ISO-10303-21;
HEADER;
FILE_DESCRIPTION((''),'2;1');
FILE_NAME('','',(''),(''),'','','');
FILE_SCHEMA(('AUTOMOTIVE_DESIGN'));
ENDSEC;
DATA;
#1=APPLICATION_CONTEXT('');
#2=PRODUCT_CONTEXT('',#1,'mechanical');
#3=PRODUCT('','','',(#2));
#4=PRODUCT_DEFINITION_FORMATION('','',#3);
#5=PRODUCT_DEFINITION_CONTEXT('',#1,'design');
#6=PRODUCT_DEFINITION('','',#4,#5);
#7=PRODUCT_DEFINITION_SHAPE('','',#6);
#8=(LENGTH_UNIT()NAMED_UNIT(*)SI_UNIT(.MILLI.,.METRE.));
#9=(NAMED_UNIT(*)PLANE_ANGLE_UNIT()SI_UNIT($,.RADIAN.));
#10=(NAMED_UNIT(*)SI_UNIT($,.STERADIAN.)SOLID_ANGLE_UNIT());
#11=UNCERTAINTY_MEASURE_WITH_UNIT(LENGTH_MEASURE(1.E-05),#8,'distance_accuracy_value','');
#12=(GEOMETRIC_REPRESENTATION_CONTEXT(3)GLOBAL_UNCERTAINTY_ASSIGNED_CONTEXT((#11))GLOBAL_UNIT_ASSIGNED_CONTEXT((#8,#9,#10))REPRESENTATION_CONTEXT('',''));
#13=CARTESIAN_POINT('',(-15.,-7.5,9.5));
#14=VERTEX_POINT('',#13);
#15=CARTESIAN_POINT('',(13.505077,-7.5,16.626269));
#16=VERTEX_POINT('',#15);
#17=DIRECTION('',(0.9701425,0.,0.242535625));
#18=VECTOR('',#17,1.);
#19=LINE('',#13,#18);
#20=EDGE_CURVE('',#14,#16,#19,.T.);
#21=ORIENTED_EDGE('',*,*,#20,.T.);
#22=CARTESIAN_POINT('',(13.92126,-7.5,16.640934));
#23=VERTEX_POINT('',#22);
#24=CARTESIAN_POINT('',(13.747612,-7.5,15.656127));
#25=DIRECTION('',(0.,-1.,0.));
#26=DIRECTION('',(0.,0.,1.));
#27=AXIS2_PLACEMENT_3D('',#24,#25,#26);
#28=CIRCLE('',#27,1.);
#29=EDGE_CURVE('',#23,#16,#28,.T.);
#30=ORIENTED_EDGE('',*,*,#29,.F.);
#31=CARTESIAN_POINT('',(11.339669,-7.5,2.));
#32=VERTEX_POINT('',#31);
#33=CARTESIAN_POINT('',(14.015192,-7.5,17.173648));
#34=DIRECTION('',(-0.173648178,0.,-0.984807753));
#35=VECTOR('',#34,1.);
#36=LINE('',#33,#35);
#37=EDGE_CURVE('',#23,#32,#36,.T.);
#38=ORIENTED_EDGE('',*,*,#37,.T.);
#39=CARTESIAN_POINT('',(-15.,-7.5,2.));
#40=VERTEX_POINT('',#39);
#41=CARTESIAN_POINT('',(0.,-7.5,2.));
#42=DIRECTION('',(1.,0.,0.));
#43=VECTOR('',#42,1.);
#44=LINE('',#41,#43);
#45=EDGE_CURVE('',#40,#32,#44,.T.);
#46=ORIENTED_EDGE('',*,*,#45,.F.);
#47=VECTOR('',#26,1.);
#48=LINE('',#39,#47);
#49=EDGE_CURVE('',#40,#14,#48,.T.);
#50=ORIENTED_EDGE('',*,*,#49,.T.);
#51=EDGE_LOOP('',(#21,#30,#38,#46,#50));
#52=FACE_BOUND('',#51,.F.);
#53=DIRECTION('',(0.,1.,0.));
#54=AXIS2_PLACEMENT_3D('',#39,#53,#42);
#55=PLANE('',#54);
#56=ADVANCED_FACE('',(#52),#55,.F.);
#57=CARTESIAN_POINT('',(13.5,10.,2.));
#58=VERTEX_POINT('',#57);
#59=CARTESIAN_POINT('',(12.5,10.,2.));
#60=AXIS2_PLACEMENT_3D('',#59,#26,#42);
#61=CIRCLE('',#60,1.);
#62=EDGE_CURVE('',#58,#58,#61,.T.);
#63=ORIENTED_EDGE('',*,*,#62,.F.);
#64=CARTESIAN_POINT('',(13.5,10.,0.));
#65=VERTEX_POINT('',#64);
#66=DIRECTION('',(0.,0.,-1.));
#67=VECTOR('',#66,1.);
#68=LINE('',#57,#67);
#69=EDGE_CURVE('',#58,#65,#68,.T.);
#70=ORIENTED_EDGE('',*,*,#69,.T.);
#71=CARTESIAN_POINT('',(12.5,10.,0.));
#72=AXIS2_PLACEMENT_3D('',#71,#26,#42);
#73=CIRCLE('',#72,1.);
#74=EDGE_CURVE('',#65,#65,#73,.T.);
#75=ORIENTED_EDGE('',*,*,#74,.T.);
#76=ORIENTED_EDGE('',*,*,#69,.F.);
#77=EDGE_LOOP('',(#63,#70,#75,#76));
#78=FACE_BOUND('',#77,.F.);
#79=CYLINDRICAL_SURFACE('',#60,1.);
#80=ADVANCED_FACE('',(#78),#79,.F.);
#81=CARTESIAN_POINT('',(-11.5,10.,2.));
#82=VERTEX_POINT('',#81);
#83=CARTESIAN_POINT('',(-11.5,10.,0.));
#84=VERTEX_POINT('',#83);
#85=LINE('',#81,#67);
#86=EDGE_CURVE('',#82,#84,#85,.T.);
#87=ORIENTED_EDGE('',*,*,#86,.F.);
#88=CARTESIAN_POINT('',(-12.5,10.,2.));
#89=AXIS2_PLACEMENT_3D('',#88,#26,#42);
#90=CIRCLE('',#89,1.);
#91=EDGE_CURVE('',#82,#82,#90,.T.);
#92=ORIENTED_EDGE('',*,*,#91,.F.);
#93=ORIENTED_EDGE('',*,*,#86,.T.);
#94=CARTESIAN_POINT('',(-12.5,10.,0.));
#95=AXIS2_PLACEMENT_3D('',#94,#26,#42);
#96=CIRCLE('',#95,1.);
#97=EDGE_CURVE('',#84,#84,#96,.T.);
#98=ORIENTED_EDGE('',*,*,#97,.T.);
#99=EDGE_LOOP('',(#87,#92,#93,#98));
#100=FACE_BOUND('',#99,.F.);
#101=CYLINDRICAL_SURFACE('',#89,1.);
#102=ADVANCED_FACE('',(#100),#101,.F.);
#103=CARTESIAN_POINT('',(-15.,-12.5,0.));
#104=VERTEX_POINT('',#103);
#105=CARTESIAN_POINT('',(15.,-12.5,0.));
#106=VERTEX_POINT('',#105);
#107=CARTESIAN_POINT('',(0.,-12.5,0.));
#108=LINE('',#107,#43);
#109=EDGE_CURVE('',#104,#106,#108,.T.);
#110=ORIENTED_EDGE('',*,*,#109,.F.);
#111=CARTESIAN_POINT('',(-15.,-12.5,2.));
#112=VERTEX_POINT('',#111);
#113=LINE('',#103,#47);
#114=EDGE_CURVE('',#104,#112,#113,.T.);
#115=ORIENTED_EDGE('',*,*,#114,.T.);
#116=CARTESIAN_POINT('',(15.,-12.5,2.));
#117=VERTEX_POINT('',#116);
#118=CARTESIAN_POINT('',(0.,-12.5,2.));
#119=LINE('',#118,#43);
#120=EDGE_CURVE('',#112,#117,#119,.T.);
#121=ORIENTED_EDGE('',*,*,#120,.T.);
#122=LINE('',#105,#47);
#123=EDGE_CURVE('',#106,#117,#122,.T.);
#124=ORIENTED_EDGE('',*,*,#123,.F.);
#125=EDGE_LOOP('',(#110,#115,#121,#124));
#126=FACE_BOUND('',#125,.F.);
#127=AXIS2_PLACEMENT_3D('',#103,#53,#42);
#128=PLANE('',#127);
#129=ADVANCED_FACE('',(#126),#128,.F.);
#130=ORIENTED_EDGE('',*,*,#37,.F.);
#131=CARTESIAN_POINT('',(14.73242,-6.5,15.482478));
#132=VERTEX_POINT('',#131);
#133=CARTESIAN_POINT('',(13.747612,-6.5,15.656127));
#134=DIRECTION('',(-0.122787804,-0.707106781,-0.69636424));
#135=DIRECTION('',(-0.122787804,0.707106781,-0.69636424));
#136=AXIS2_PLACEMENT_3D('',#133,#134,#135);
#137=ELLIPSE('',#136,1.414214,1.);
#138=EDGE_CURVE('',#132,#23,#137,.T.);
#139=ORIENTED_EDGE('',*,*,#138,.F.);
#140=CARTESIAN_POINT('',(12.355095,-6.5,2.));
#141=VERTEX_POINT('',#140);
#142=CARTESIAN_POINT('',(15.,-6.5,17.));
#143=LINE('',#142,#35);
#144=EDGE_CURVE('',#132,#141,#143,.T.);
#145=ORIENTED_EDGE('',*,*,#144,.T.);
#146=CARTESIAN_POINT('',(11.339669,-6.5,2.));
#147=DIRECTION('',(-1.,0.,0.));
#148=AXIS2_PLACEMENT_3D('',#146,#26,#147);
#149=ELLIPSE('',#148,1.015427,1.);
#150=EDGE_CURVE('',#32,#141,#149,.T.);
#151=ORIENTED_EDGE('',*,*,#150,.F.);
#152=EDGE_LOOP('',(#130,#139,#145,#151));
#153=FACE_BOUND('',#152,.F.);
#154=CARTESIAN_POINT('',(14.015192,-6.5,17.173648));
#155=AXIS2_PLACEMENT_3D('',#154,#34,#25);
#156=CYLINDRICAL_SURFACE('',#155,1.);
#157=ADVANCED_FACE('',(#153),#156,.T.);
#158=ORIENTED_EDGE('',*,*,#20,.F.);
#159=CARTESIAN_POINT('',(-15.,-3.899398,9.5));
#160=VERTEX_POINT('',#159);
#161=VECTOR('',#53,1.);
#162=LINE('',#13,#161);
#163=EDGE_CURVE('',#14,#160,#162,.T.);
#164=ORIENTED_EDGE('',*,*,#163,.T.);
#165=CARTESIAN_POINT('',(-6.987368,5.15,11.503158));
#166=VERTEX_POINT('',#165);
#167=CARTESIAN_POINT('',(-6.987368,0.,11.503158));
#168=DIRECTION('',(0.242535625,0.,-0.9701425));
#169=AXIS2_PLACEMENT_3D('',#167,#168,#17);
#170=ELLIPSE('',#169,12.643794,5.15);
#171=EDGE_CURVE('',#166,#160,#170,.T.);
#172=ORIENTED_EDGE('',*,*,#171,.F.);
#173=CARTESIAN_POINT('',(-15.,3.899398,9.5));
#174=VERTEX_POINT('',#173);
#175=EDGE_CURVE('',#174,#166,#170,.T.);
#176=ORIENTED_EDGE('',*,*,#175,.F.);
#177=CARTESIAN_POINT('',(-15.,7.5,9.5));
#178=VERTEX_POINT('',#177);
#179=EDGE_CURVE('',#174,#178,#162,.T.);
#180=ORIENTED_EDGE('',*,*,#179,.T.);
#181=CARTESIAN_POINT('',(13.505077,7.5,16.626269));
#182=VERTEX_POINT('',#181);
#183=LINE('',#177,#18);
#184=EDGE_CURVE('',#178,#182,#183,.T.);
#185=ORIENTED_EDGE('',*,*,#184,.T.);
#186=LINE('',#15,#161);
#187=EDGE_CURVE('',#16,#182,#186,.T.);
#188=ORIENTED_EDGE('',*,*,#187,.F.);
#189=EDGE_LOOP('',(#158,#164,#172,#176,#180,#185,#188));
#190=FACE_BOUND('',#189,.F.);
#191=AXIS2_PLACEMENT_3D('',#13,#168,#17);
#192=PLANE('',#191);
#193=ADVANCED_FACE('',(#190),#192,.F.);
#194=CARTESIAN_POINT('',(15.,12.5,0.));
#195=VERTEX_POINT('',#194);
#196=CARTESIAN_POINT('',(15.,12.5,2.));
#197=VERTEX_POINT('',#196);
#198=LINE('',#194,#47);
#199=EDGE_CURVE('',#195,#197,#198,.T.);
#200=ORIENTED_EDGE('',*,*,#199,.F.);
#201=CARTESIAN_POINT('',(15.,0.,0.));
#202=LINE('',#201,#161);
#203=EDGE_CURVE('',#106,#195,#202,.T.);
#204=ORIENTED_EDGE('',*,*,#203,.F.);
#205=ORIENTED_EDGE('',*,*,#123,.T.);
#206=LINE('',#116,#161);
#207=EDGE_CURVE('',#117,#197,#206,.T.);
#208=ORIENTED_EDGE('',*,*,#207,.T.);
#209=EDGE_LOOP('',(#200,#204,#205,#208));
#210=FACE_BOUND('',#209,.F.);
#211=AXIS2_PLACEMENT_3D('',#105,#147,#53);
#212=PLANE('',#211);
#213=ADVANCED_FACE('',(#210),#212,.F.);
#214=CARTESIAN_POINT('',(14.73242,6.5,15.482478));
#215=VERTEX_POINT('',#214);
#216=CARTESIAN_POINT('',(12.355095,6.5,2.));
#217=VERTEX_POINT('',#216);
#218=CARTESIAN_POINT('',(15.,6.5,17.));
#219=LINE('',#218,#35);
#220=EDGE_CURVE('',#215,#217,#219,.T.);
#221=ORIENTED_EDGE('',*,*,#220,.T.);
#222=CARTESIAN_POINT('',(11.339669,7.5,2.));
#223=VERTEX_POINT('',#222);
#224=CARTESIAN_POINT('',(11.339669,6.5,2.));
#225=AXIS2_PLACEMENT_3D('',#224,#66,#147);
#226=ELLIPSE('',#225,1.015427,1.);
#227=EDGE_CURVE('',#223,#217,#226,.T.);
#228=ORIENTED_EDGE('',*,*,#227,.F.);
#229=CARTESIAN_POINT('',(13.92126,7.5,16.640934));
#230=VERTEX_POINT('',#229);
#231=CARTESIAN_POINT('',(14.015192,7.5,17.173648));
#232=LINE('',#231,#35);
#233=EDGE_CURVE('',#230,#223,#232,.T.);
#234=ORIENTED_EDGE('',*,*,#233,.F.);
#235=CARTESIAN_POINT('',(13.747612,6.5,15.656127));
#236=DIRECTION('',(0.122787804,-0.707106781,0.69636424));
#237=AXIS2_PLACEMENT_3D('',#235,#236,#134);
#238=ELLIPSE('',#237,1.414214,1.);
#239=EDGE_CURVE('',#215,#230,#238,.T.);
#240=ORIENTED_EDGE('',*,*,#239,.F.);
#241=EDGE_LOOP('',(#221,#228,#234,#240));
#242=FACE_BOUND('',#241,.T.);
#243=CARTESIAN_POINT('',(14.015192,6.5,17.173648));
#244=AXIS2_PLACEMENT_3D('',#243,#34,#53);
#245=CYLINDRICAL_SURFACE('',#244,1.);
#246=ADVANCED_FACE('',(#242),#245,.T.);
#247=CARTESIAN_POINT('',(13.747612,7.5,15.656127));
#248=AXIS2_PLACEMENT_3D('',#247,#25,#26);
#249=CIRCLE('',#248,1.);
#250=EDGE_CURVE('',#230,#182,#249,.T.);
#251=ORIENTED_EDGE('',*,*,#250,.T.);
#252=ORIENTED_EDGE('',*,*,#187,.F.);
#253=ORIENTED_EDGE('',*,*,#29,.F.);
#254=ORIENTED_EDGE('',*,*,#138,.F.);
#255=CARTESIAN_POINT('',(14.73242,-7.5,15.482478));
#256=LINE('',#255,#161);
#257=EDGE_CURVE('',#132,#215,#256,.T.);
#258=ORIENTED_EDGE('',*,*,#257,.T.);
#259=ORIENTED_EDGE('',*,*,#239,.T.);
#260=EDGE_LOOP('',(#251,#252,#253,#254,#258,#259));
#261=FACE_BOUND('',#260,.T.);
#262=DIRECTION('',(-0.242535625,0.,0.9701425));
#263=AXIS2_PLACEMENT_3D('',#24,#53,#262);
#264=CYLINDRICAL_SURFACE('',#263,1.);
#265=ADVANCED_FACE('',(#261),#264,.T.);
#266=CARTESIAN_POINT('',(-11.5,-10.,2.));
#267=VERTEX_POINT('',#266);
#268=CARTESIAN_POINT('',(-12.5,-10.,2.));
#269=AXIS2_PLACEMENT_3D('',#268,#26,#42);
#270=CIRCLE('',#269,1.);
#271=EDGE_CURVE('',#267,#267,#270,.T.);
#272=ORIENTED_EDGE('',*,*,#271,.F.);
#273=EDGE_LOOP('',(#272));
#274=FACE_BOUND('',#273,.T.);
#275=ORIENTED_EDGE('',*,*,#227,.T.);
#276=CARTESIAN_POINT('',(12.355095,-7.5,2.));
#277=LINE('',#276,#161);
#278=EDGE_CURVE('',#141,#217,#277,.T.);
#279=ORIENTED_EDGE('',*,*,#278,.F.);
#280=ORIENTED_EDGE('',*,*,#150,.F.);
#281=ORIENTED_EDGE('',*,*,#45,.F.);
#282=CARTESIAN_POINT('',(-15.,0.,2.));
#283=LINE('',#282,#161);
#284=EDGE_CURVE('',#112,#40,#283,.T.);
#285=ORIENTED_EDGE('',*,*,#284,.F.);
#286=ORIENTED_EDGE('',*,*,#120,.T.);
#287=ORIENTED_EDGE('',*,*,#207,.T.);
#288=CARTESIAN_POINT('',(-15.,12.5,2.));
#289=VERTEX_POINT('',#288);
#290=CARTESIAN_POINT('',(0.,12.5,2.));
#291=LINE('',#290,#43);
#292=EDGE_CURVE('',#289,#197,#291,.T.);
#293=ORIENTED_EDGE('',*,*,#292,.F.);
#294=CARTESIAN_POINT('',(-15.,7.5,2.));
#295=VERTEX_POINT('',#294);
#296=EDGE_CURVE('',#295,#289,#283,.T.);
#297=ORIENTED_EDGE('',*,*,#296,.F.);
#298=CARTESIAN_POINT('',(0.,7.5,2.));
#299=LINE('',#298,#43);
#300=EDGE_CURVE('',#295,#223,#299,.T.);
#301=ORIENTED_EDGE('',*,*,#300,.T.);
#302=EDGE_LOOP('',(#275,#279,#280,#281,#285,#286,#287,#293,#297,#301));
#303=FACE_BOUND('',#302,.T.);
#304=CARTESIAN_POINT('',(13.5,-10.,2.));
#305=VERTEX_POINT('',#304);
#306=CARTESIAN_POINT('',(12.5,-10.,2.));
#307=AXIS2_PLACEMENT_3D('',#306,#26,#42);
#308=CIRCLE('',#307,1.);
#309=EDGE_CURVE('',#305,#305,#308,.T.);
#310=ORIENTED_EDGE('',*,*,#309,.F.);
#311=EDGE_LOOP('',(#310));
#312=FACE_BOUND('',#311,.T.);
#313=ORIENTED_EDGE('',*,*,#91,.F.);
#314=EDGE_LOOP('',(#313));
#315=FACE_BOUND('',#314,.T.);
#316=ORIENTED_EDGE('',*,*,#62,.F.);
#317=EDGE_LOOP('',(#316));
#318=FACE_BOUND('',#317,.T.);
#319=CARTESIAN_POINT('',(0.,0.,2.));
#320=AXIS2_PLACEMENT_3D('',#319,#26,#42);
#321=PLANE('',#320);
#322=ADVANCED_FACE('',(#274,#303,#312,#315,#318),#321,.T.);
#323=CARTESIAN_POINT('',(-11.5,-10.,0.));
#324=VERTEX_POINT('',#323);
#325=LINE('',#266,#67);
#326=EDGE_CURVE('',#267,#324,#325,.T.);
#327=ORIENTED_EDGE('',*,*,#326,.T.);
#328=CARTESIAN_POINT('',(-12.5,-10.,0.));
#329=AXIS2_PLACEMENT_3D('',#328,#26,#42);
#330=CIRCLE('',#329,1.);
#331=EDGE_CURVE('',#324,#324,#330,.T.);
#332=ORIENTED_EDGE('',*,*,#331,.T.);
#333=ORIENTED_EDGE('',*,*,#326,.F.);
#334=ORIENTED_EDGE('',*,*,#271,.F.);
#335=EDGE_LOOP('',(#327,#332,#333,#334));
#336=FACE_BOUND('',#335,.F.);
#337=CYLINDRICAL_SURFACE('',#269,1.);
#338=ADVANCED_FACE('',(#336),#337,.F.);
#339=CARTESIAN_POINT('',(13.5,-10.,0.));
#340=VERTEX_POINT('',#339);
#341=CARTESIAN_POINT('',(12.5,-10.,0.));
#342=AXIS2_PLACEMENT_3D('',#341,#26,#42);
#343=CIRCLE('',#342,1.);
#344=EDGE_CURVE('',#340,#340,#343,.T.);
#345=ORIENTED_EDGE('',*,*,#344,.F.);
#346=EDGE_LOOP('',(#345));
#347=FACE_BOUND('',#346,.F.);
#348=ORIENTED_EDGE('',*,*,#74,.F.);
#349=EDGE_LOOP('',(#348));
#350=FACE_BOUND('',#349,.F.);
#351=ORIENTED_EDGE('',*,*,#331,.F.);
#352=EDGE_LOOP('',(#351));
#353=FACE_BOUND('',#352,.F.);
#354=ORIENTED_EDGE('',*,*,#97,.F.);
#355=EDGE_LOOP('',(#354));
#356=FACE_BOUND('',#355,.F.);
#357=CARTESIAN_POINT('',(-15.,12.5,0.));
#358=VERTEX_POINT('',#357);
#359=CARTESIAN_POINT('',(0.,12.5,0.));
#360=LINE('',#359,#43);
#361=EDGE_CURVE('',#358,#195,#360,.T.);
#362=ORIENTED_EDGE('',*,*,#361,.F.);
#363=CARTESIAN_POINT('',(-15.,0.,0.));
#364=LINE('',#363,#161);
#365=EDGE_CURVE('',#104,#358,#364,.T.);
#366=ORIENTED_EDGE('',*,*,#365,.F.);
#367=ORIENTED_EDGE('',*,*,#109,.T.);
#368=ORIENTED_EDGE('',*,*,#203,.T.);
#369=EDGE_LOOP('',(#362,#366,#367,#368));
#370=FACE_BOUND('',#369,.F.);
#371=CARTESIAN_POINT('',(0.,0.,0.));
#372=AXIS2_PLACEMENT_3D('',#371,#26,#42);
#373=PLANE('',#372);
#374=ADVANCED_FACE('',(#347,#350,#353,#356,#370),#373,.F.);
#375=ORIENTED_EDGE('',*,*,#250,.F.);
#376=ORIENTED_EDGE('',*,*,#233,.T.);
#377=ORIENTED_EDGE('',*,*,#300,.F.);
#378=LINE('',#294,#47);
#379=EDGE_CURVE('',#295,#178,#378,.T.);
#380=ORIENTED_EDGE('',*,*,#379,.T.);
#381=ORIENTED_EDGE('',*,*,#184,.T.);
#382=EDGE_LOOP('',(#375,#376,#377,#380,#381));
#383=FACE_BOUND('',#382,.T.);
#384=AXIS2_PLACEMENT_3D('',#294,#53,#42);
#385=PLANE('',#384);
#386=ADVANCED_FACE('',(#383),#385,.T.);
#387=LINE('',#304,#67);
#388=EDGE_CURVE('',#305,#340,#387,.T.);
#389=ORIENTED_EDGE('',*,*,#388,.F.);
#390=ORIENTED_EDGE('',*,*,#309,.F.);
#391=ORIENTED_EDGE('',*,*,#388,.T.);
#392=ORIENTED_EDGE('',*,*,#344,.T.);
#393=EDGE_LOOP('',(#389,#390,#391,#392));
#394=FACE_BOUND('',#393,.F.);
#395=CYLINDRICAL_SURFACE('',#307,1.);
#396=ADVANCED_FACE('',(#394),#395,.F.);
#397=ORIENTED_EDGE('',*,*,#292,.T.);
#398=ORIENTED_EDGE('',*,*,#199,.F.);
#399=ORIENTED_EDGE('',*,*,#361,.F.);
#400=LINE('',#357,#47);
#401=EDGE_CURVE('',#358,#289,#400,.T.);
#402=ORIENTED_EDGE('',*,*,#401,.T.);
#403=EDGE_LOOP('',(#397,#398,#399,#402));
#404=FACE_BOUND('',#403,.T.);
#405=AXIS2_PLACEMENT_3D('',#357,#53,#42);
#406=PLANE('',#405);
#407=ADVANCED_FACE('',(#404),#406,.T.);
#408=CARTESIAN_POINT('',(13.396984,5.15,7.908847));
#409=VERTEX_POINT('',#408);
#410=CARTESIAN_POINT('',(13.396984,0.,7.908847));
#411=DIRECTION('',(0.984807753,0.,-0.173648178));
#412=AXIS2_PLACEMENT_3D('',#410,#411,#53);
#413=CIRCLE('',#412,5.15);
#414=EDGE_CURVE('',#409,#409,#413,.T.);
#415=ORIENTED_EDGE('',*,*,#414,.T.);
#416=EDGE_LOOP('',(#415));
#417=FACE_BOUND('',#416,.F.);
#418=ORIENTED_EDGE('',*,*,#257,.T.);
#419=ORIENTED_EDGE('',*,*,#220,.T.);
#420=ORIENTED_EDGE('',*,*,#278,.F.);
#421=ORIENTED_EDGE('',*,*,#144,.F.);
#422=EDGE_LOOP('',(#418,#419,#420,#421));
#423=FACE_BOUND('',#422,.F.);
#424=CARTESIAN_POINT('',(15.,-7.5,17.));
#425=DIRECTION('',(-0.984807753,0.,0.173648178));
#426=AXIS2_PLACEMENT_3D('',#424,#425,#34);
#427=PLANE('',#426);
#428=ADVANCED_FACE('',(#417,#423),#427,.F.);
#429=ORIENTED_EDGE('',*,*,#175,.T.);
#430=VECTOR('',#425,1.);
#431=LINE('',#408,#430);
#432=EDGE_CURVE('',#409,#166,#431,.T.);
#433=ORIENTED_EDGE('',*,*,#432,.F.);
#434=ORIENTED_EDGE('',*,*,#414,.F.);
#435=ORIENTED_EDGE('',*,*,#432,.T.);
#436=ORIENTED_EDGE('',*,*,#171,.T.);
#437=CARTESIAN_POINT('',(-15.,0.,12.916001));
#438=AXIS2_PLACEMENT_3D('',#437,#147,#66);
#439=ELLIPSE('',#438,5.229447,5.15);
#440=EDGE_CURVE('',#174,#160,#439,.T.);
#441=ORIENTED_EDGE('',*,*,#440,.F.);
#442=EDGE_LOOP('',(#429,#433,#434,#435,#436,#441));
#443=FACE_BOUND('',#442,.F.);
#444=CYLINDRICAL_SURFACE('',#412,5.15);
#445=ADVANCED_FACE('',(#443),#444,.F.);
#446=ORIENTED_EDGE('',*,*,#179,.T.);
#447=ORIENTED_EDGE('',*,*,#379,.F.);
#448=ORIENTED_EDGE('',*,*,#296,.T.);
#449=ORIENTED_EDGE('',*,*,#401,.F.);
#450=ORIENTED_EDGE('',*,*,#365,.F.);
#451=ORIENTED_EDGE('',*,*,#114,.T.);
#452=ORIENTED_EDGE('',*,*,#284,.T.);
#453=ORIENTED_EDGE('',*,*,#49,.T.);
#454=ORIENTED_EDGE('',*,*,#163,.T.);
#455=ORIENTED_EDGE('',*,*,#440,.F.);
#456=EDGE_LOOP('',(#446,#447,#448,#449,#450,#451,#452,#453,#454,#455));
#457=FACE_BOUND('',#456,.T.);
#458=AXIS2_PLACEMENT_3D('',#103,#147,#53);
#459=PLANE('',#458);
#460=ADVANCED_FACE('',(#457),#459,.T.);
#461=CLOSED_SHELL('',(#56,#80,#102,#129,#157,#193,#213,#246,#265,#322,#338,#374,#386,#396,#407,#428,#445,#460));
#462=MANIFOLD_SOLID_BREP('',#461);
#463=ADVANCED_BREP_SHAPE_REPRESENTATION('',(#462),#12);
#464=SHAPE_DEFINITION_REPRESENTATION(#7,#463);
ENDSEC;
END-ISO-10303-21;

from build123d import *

# Parameters (mm, degrees)
F0_W      = 30
F0_H      = 25
F1_DEPTH  = 2
F2_R      = 1
F3_DEPTH  = 2
F4_W      = 30
F4_H      = 15
F5_DEPTH  = 15
F7_DEPTH  = 15
F9_DEPTH  = 15
F10_R     = 5.15
F11_DEPTH = 28.2428712579
F12_R     = 1


with BuildPart() as f1:
    # F0 (on Top) → F1 (new body)
    with BuildSketch(Plane.XY):
        Rectangle(F0_W, F0_H)
    extrude(amount=F1_DEPTH)

    # F2 (on face) → F3 (cut)
    with BuildSketch(Plane.XY.offset(2)):
        with Locations((12.5, 10)):
            Circle(F2_R)
        with Locations((-12.5, 10)):
            Circle(F2_R)
        with Locations((-12.5, -10)):
            Circle(F2_R)
        with Locations((12.5, -10)):
            Circle(F2_R)
    extrude(amount=-F3_DEPTH, mode=Mode.SUBTRACT)

    # F4 (on face) → F5 (join)
    with BuildSketch(Plane.XY.offset(2)):
        Rectangle(F4_W, F4_H)
    extrude(amount=F5_DEPTH)

    # F6 (on face) → F7 (cut, through all)
    with BuildSketch(Plane.XZ.offset(7.5)):
        Polygon((-15, 9.5), (15, 17), (-15, 17), align=None)
    extrude(amount=-F7_DEPTH, mode=Mode.SUBTRACT)

    # F8 (on face) → F9 (cut, through all)
    with BuildSketch(Plane.XZ.offset(7.5)):
        Polygon((15, 2), (15, 17), (12.3550952894, 2), align=None)
    extrude(amount=-F9_DEPTH, mode=Mode.SUBTRACT)

    # F10 (on face) → F11 (cut, through all)
    with BuildSketch(Plane(origin=(11.6405234376, 0, -2.0525383516), x_dir=(0, 1, 0), z_dir=(0.984807753, 0, -0.1736481777))):
        with Locations((0, 10.1150552879)):
            Circle(F10_R)
    extrude(amount=-F11_DEPTH, mode=Mode.SUBTRACT)

    # F12
    f12_edges = [f1.edges().sort_by_distance(p)[0] for p in [
        (13.677548, -7.5, 9.5),
        (13.677548, 7.5, 9.5),
        (15, 0, 17),
    ]]
    fillet(f12_edges, radius=F12_R)


solid = f1.part
